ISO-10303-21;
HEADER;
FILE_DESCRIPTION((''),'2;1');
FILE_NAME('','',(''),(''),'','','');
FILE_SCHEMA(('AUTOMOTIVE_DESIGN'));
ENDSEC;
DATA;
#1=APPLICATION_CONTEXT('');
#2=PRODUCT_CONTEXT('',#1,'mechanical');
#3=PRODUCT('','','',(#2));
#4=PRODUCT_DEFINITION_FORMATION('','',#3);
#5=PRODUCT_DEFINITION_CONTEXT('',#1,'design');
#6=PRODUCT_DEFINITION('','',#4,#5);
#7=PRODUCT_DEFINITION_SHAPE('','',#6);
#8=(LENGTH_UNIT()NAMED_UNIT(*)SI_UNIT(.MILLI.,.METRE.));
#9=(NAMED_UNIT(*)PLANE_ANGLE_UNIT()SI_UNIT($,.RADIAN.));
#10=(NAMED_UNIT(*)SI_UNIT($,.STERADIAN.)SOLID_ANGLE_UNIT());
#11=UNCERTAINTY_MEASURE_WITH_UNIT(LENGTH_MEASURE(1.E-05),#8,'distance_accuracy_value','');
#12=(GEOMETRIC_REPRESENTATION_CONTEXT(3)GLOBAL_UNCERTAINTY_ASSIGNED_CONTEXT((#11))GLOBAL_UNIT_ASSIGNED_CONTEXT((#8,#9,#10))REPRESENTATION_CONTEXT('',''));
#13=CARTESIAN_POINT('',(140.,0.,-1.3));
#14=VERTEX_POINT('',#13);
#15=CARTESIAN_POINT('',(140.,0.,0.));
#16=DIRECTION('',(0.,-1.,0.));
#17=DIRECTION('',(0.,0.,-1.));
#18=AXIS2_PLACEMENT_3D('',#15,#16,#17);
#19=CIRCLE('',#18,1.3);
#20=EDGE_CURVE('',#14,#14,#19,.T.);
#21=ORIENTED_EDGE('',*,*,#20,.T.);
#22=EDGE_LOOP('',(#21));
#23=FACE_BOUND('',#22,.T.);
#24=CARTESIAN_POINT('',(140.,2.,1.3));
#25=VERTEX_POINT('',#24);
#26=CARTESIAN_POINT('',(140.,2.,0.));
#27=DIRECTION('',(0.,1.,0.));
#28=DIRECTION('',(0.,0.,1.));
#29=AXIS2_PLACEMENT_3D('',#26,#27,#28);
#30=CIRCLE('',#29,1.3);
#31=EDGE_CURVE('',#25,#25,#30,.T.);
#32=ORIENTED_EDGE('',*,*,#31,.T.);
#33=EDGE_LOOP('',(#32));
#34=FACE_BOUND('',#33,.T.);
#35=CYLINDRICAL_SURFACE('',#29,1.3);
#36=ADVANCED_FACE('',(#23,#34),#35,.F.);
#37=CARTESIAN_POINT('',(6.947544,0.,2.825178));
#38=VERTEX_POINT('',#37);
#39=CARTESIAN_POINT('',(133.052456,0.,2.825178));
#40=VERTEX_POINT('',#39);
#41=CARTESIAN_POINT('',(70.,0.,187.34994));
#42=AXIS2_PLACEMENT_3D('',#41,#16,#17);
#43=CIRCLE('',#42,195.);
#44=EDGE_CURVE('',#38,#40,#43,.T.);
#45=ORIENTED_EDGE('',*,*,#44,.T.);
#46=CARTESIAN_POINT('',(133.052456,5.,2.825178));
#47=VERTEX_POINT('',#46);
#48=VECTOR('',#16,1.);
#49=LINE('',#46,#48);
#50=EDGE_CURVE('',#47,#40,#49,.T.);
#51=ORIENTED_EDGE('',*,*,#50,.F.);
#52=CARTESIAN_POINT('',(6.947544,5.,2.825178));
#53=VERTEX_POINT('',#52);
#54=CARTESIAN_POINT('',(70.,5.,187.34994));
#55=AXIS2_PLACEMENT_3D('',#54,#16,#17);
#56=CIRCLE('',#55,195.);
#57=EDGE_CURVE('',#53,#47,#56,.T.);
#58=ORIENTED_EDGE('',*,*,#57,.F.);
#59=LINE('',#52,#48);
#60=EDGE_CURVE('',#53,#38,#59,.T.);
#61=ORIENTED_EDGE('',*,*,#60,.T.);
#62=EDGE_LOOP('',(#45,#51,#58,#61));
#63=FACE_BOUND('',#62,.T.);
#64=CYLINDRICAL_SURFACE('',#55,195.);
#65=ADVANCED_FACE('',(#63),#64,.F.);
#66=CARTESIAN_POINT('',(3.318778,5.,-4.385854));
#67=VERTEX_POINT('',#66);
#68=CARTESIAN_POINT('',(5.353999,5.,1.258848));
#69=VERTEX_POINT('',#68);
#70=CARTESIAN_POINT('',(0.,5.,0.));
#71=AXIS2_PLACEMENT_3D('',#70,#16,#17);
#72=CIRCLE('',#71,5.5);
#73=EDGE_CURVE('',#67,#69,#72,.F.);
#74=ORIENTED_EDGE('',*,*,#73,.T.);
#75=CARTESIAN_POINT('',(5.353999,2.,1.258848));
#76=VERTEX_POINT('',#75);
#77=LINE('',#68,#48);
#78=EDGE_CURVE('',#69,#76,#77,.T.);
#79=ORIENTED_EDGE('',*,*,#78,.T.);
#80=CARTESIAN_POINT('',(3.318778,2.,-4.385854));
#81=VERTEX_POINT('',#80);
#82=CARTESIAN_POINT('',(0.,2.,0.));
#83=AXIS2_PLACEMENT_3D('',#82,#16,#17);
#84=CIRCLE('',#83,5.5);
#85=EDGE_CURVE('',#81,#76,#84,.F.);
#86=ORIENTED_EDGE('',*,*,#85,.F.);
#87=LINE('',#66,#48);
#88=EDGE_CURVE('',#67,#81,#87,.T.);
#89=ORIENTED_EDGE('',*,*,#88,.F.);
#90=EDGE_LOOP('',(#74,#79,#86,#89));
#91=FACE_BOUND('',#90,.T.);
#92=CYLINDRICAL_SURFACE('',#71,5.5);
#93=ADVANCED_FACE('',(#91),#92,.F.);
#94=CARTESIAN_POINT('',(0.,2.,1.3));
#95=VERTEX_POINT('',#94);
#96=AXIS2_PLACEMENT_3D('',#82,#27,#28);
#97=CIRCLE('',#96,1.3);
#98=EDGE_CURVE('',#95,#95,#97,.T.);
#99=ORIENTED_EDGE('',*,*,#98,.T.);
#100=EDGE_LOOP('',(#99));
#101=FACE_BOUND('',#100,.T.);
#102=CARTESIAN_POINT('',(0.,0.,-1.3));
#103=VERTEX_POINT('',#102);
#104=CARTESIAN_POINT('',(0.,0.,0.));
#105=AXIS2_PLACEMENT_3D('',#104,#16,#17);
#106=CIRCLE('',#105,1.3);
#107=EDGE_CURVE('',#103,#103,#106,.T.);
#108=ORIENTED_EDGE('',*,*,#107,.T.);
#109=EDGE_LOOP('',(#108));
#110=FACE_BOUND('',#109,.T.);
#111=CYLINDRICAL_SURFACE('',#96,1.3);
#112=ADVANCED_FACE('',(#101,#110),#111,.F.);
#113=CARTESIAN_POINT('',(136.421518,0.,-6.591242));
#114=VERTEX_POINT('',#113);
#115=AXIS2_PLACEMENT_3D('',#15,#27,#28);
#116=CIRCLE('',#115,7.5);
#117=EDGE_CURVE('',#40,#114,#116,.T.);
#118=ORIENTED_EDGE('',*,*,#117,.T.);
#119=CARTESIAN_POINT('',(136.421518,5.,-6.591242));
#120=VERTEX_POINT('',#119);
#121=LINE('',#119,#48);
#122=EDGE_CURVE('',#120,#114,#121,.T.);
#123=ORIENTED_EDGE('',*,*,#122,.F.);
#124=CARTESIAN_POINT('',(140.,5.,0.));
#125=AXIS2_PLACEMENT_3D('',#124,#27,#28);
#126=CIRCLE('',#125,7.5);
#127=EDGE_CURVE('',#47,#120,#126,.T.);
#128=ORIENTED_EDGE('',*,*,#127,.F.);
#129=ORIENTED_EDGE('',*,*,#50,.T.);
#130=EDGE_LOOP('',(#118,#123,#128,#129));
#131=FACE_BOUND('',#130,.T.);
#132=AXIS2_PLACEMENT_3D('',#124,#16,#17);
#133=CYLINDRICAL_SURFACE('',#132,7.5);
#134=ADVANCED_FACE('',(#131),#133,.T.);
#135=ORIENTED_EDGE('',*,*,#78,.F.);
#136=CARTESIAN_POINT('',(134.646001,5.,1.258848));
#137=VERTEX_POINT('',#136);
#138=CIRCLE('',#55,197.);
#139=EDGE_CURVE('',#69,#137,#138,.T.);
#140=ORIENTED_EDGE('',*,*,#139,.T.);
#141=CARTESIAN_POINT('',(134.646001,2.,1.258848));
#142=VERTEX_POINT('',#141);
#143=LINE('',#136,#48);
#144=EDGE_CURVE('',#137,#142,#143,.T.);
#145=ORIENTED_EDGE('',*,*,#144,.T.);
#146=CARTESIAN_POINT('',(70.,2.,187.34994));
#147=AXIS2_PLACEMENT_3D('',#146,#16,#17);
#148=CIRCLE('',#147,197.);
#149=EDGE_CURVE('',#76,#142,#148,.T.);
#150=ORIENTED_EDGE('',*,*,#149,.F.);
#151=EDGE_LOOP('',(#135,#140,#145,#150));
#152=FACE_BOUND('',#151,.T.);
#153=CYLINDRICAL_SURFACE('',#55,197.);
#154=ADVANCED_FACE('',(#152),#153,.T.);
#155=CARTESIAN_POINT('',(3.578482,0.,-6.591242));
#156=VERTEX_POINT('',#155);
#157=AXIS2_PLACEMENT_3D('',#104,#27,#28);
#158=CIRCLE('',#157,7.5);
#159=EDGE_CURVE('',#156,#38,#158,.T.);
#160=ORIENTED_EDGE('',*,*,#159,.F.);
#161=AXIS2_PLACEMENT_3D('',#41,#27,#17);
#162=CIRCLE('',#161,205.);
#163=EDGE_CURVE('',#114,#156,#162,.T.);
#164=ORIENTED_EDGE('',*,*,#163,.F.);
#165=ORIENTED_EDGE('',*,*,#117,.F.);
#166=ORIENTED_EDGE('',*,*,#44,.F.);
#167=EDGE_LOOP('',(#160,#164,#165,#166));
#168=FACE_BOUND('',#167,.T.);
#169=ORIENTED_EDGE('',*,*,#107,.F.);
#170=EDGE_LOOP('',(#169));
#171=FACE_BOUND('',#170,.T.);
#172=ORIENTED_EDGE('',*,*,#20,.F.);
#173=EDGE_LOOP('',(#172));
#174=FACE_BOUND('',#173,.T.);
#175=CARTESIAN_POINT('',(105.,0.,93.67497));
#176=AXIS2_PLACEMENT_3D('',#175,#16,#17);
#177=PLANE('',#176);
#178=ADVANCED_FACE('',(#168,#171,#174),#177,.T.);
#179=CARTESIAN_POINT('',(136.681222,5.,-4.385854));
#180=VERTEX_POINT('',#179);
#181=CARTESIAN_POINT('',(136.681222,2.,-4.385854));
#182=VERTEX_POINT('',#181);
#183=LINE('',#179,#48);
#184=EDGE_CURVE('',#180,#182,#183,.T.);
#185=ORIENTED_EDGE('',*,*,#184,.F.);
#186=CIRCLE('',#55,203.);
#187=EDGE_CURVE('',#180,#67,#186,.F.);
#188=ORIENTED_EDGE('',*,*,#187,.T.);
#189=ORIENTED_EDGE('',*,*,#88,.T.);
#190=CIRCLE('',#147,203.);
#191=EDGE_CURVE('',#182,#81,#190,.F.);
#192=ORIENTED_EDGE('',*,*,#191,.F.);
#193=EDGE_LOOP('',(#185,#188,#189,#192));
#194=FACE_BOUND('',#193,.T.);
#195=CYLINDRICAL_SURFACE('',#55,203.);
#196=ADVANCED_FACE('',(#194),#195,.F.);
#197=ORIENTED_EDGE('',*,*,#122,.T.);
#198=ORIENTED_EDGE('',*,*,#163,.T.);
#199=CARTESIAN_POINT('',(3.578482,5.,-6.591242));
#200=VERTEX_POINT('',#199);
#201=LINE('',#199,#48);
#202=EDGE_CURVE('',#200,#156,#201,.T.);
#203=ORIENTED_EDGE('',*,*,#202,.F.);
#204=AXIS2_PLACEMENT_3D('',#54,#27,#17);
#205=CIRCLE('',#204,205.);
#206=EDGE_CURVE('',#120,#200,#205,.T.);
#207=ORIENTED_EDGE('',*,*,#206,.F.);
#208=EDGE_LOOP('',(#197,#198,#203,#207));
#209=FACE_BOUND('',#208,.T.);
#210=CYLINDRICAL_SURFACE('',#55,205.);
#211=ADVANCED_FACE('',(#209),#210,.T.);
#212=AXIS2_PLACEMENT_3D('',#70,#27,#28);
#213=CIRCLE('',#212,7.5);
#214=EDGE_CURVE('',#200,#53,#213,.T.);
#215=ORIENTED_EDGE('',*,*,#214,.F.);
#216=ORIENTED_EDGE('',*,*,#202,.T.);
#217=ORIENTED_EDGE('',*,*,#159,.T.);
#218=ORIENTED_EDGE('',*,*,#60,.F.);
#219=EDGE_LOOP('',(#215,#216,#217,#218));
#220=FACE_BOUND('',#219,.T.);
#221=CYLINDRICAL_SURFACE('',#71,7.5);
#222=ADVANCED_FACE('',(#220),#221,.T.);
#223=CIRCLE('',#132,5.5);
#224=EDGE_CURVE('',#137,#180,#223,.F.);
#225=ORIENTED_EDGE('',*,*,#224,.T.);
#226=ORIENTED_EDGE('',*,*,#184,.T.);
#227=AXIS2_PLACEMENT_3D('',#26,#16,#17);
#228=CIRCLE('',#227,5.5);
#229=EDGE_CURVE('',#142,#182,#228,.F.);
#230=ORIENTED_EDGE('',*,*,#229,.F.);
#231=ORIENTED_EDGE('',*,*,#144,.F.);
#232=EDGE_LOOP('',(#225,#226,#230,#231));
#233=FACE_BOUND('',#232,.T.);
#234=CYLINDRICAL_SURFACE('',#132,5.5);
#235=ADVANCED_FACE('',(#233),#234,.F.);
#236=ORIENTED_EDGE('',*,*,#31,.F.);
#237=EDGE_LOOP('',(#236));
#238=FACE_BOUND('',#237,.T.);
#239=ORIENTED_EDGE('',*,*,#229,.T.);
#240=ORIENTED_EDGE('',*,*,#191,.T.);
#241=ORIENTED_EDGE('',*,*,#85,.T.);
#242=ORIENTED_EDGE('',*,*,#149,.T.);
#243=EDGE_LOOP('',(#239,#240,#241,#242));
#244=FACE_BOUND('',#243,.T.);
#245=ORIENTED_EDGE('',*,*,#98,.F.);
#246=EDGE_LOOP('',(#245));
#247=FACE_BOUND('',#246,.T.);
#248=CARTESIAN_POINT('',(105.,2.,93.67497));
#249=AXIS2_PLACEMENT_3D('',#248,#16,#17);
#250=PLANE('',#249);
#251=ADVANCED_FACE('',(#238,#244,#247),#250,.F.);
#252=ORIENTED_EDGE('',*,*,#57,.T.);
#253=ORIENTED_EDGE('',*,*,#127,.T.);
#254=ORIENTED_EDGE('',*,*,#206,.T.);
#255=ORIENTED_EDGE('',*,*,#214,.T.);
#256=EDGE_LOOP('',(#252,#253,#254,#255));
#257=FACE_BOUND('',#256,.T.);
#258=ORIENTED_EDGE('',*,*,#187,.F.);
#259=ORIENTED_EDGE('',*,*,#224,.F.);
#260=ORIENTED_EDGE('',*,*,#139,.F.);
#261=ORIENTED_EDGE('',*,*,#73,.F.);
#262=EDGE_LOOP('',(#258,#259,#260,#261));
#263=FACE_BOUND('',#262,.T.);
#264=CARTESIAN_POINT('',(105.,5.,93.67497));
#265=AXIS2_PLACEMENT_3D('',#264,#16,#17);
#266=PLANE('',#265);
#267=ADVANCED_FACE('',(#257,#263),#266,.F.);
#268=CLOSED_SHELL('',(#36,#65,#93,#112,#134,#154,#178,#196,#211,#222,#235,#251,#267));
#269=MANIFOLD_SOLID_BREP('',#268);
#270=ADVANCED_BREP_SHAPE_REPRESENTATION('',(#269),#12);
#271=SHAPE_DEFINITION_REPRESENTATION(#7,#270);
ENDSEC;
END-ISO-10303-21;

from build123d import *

# Parameters (mm, degrees)
DODANIE_WYCI_GNI_CIE2_DEPTH  = 5
SKORUPA2_START               = 2
SKORUPA2_DEPTH               = 3
SZKIC5_W                     = 1.3
SZKIC5_H                     = 2.001
OTW_R_POD_RUB_M22_AT_2_COUNT = 2
OTW_R_POD_RUB_M22_AT_2_PITCH = 140


# Read off the part's stored shape, not the designer's step: Skorupa2
with BuildPart() as part:
    # Szkic4 → Dodanie-wyciągnięcie2 (new body)
    with BuildSketch(Plane(origin=(0, 0, 0), x_dir=(1, 0, 0), z_dir=(0, 1, 0))):
        with BuildLine():
            ThreePointArc((3.578481933, 6.591241693), (-7.061624869, -2.526549863), (6.947544161, -2.825177894))
            ThreePointArc((6.947544161, -2.825177894), (70, 7.650060048), (133.052455839, -2.825177894))
            ThreePointArc((133.052455839, -2.825177894), (147.061624869, -2.526549863), (136.421518067, 6.591241693))
            ThreePointArc((136.421518067, 6.591241693), (70, 17.650060048), (3.578481933, 6.591241693))
        make_face()
    extrude(amount=DODANIE_WYCI_GNI_CIE2_DEPTH)

    # Skorupa2 outline → Skorupa2 (cut)
    with BuildSketch(Plane(origin=(0, 0, 0), x_dir=(1, 0, 0), z_dir=(0, 1, 0)).offset(SKORUPA2_START)):
        with BuildLine():
            ThreePointArc((3.318777837, 4.385853813), (-5.173966338, -1.865495198), (5.353998671, -1.258847978))
            ThreePointArc((5.353998671, -1.258847978), (70, 9.650060048), (134.646001329, -1.258847978))
            ThreePointArc((134.646001329, -1.258847978), (145.173966338, -1.865495198), (136.681222163, 4.385853813))
            ThreePointArc((136.681222163, 4.385853813), (70, 15.650060048), (3.318777837, 4.385853813))
        make_face()
    extrude(amount=SKORUPA2_DEPTH, mode=Mode.SUBTRACT)

    # Szkic5 → Otwór pod śrubę M22 (revolve, cut)
    with BuildSketch(Plane(origin=(0, 2, 0), x_dir=(0, 0, 1), z_dir=(1, 0, 0))):
        with Locations((0.65, 1.0005)):
            Rectangle(SZKIC5_W, SZKIC5_H)
    otw_r_pod_rub_m22 = revolve(axis=Axis((0, 8.35, 0), (0, -1, 0)), mode=Mode.SUBTRACT)

    # Otwór pod śrubę M22 at 2: Otwór pod śrubę M22 ×2
    with Locations(*[(i * OTW_R_POD_RUB_M22_AT_2_PITCH, 0, 0) for i in range(1, OTW_R_POD_RUB_M22_AT_2_COUNT)]):
        add(otw_r_pod_rub_m22, mode=Mode.SUBTRACT)


solid = part.part
